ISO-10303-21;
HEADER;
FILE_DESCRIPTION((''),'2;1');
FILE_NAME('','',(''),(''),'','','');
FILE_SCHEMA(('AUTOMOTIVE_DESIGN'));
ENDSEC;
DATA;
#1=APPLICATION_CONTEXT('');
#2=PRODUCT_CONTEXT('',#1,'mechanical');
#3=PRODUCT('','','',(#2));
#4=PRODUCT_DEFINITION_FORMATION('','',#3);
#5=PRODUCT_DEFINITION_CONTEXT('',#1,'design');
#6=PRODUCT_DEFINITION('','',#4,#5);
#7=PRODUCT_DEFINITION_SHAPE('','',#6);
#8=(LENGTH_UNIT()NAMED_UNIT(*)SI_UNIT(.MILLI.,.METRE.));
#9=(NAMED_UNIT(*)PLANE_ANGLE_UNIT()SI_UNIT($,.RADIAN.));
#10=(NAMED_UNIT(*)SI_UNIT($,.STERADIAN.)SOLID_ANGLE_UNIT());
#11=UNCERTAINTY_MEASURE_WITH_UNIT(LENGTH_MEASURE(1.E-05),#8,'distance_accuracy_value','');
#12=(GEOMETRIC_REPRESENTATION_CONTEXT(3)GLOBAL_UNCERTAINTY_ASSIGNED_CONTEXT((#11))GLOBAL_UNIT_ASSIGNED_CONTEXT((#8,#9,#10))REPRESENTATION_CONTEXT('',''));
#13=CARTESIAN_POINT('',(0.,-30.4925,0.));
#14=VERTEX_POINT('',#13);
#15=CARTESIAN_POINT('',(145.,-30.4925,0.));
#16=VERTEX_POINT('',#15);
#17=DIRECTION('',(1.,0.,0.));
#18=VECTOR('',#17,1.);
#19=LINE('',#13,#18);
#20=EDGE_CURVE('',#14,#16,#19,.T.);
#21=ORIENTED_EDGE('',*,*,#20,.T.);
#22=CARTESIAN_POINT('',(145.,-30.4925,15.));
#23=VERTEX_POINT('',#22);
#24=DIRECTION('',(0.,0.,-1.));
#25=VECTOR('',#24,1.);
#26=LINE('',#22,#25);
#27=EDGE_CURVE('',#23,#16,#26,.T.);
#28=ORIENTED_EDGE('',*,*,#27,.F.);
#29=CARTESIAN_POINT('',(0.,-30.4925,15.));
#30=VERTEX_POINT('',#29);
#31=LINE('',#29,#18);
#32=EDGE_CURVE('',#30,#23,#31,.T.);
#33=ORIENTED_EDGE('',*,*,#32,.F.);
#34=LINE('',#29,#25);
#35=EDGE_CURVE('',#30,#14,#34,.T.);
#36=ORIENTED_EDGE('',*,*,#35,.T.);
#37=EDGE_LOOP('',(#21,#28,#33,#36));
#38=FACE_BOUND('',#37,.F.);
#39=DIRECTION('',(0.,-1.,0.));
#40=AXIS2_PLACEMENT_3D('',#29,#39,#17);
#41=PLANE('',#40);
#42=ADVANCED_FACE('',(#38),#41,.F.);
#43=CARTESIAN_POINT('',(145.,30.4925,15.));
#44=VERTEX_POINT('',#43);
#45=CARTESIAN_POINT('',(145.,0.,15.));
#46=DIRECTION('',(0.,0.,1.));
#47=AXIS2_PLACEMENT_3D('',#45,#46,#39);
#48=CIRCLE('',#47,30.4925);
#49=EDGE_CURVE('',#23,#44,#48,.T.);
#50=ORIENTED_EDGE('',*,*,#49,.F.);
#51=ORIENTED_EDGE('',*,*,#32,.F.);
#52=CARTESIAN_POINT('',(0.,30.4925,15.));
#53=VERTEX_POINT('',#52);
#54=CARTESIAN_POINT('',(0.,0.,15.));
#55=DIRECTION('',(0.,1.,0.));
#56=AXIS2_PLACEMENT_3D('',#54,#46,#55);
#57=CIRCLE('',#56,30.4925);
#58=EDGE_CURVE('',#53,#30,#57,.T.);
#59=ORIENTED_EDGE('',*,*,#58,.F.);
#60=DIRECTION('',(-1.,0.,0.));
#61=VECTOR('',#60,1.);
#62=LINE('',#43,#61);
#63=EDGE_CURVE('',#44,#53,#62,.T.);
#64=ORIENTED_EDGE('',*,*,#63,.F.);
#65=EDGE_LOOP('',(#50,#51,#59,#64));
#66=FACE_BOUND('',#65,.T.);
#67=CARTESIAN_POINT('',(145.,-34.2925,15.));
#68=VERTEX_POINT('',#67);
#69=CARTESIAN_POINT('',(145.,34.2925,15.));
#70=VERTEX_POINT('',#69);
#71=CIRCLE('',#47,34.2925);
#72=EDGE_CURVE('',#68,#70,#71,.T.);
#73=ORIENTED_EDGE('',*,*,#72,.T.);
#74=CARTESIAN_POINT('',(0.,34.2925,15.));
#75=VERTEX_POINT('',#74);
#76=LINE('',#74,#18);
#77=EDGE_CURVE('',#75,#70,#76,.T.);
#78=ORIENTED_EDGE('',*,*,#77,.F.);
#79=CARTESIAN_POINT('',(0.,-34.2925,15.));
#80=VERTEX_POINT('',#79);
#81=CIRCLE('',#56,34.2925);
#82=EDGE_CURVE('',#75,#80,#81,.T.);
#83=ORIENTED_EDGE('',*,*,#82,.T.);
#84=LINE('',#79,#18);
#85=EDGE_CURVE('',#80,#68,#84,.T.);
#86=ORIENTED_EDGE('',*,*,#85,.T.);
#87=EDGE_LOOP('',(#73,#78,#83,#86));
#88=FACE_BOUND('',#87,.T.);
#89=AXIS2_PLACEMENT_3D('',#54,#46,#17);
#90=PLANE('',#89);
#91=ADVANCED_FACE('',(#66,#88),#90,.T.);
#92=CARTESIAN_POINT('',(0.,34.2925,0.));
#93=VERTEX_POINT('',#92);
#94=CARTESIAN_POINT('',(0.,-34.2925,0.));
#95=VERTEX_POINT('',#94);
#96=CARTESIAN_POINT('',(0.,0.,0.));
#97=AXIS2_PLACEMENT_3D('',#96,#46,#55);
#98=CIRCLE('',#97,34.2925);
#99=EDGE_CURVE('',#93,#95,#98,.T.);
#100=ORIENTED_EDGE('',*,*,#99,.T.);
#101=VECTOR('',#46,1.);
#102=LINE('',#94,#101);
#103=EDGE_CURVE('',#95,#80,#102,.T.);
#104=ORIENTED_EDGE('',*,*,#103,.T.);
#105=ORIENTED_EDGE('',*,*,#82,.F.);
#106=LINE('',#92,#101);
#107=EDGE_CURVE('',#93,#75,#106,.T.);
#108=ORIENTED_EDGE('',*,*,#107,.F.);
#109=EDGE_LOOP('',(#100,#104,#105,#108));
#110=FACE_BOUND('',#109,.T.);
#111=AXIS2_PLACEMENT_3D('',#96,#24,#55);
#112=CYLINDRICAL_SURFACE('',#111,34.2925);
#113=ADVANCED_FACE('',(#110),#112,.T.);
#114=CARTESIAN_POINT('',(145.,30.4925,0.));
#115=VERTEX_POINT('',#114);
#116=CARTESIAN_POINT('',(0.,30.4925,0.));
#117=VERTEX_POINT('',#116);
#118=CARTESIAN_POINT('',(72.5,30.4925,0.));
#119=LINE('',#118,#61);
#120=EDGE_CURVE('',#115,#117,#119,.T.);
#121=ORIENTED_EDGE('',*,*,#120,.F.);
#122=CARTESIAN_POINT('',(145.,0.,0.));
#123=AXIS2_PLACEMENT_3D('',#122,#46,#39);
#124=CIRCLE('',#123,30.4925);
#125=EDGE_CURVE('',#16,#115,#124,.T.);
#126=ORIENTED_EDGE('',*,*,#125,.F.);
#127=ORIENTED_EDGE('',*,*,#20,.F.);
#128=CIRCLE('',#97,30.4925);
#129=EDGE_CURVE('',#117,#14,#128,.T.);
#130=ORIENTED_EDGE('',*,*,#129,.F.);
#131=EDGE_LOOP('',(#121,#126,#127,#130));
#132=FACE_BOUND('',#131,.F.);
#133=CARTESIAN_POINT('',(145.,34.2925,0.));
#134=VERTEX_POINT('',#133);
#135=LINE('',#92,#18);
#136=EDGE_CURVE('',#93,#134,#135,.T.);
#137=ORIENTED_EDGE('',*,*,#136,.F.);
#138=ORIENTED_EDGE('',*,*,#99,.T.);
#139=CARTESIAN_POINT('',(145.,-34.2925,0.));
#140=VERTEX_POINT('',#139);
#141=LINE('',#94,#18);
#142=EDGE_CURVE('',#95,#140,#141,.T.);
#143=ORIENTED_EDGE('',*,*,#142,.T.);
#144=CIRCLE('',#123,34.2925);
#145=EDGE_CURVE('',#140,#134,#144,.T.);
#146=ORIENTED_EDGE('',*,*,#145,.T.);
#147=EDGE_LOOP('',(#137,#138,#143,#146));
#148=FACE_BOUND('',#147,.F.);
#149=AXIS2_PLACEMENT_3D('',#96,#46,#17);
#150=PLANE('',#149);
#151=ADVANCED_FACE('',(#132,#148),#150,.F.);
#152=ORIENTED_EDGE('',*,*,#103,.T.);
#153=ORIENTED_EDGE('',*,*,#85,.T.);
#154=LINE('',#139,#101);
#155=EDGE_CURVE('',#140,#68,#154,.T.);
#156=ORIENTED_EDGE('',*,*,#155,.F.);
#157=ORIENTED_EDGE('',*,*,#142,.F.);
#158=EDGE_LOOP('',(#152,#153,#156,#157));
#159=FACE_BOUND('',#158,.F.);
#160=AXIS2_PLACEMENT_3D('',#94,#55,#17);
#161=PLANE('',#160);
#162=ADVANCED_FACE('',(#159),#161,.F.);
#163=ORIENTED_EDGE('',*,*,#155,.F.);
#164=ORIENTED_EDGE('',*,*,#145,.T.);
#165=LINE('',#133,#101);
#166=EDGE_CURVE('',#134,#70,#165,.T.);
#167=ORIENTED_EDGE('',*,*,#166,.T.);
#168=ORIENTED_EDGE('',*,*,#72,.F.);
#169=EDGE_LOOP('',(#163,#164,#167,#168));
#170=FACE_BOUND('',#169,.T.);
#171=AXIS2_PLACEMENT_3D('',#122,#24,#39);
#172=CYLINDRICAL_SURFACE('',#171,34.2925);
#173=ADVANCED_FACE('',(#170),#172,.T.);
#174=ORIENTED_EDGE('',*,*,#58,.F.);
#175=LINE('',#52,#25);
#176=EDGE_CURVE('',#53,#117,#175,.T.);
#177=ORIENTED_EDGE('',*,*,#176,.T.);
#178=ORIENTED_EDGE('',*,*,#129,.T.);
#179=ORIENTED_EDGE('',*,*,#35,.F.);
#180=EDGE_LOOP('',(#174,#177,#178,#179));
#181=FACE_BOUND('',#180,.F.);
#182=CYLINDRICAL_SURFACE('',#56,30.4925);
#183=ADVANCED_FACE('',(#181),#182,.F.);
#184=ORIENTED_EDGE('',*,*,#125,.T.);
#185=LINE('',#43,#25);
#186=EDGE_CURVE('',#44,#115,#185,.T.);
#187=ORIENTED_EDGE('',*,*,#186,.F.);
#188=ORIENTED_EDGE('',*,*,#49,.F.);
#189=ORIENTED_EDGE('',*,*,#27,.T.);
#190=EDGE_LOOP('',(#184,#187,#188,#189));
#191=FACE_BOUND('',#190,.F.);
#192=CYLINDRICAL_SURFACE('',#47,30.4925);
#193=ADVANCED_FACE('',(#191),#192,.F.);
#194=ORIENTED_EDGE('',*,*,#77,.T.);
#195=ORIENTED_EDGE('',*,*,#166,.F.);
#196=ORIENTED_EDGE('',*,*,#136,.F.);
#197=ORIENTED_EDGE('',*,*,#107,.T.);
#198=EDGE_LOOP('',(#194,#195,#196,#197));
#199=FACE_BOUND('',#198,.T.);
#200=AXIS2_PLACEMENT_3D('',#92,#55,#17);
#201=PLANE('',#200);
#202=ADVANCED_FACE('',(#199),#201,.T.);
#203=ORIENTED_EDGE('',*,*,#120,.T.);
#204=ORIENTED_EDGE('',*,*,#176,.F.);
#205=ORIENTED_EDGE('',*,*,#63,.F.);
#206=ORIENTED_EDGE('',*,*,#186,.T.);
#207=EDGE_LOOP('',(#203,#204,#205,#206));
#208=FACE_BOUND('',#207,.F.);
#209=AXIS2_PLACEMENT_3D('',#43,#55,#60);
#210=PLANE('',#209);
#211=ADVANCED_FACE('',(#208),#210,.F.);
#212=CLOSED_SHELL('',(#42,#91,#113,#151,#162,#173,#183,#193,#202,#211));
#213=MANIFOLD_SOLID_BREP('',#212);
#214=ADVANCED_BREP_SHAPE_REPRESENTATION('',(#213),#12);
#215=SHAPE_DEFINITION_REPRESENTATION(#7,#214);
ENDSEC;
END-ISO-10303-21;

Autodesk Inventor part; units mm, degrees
ref_plane "YZ Plane" through (0, 0, 0) normal (1, 0, 0) x (0, 1, 0)
ref_plane "XZ Plane" through (0, 0, 0) normal (0, 1, 0) x (-1, 0, 0)
ref_plane "XY Plane" through (0, 0, 0) normal (0, 0, 1) x (1, 0, 0)
sketch "BeltOuterProfile" plane through (0, 0, 0) normal (0, 0, 1) x (1, 0, 0)
  arc A0 (0, 34.2925) -> (0, -34.2925) centre (0, 0) ccw
  arc A1 (145, -34.2925) -> (145, 34.2925) centre (145, 0) ccw
  line L0 (0, 34.2925) -> (145, 34.2925)
  line L1 (0, -34.2925) -> (145, -34.2925)
  line L2 (0, 0) -> (500, 0) construction
  line L3 (145, 34.2925) -> (145, 0) construction
  line L4 (145, 0) -> (145, -34.2925) construction
  line L5 (0, 0) -> (0, 34.2925) construction
  line L6 (0, 0) -> (0, -34.2925) construction
  dimension "BeltLength" = 500
  dimension "CenterDistance" = 145
  dimension "d24" = 34.2925
  dimension "d25" = 34.2925
extrude "BeltWidth" add sketch "BeltOuterProfile" along normal blind 15
sketch "BeltThickness" plane through (0, 0, 15) normal (0, 0, 1) x (1, 0, 0)
  arc A0 (0, 34.2925) -> (0, -34.2925) centre (0, 0) ccw projected
  line L0 (0, -34.2925) -> (145, -34.2925) projected
  arc A1 (145, -34.2925) -> (145, 34.2925) centre (145, 0) ccw projected
  line L1 (145, 34.2925) -> (0, 34.2925) projected
  arc A2 (0, 30.4925) -> (0, -30.4925) centre (0, 0) ccw
  line L2 (0, -30.4925) -> (145, -30.4925)
  arc A3 (145, -30.4925) -> (145, 30.4925) centre (145, 0) ccw
  line L3 (145, 30.4925) -> (0, 30.4925)
  dimension "d17" = 3.8
extrude "BeltInternalAreaCut" cut sketch "BeltThickness" against normal through all contours L3 A3 L2 A2
equation "\"Pulley1WrapLength\" = 1"
equation "\"Pulley2WrapLength\" = 1"
properties part number "Belt Calculator" material "Nylon 6/6"
